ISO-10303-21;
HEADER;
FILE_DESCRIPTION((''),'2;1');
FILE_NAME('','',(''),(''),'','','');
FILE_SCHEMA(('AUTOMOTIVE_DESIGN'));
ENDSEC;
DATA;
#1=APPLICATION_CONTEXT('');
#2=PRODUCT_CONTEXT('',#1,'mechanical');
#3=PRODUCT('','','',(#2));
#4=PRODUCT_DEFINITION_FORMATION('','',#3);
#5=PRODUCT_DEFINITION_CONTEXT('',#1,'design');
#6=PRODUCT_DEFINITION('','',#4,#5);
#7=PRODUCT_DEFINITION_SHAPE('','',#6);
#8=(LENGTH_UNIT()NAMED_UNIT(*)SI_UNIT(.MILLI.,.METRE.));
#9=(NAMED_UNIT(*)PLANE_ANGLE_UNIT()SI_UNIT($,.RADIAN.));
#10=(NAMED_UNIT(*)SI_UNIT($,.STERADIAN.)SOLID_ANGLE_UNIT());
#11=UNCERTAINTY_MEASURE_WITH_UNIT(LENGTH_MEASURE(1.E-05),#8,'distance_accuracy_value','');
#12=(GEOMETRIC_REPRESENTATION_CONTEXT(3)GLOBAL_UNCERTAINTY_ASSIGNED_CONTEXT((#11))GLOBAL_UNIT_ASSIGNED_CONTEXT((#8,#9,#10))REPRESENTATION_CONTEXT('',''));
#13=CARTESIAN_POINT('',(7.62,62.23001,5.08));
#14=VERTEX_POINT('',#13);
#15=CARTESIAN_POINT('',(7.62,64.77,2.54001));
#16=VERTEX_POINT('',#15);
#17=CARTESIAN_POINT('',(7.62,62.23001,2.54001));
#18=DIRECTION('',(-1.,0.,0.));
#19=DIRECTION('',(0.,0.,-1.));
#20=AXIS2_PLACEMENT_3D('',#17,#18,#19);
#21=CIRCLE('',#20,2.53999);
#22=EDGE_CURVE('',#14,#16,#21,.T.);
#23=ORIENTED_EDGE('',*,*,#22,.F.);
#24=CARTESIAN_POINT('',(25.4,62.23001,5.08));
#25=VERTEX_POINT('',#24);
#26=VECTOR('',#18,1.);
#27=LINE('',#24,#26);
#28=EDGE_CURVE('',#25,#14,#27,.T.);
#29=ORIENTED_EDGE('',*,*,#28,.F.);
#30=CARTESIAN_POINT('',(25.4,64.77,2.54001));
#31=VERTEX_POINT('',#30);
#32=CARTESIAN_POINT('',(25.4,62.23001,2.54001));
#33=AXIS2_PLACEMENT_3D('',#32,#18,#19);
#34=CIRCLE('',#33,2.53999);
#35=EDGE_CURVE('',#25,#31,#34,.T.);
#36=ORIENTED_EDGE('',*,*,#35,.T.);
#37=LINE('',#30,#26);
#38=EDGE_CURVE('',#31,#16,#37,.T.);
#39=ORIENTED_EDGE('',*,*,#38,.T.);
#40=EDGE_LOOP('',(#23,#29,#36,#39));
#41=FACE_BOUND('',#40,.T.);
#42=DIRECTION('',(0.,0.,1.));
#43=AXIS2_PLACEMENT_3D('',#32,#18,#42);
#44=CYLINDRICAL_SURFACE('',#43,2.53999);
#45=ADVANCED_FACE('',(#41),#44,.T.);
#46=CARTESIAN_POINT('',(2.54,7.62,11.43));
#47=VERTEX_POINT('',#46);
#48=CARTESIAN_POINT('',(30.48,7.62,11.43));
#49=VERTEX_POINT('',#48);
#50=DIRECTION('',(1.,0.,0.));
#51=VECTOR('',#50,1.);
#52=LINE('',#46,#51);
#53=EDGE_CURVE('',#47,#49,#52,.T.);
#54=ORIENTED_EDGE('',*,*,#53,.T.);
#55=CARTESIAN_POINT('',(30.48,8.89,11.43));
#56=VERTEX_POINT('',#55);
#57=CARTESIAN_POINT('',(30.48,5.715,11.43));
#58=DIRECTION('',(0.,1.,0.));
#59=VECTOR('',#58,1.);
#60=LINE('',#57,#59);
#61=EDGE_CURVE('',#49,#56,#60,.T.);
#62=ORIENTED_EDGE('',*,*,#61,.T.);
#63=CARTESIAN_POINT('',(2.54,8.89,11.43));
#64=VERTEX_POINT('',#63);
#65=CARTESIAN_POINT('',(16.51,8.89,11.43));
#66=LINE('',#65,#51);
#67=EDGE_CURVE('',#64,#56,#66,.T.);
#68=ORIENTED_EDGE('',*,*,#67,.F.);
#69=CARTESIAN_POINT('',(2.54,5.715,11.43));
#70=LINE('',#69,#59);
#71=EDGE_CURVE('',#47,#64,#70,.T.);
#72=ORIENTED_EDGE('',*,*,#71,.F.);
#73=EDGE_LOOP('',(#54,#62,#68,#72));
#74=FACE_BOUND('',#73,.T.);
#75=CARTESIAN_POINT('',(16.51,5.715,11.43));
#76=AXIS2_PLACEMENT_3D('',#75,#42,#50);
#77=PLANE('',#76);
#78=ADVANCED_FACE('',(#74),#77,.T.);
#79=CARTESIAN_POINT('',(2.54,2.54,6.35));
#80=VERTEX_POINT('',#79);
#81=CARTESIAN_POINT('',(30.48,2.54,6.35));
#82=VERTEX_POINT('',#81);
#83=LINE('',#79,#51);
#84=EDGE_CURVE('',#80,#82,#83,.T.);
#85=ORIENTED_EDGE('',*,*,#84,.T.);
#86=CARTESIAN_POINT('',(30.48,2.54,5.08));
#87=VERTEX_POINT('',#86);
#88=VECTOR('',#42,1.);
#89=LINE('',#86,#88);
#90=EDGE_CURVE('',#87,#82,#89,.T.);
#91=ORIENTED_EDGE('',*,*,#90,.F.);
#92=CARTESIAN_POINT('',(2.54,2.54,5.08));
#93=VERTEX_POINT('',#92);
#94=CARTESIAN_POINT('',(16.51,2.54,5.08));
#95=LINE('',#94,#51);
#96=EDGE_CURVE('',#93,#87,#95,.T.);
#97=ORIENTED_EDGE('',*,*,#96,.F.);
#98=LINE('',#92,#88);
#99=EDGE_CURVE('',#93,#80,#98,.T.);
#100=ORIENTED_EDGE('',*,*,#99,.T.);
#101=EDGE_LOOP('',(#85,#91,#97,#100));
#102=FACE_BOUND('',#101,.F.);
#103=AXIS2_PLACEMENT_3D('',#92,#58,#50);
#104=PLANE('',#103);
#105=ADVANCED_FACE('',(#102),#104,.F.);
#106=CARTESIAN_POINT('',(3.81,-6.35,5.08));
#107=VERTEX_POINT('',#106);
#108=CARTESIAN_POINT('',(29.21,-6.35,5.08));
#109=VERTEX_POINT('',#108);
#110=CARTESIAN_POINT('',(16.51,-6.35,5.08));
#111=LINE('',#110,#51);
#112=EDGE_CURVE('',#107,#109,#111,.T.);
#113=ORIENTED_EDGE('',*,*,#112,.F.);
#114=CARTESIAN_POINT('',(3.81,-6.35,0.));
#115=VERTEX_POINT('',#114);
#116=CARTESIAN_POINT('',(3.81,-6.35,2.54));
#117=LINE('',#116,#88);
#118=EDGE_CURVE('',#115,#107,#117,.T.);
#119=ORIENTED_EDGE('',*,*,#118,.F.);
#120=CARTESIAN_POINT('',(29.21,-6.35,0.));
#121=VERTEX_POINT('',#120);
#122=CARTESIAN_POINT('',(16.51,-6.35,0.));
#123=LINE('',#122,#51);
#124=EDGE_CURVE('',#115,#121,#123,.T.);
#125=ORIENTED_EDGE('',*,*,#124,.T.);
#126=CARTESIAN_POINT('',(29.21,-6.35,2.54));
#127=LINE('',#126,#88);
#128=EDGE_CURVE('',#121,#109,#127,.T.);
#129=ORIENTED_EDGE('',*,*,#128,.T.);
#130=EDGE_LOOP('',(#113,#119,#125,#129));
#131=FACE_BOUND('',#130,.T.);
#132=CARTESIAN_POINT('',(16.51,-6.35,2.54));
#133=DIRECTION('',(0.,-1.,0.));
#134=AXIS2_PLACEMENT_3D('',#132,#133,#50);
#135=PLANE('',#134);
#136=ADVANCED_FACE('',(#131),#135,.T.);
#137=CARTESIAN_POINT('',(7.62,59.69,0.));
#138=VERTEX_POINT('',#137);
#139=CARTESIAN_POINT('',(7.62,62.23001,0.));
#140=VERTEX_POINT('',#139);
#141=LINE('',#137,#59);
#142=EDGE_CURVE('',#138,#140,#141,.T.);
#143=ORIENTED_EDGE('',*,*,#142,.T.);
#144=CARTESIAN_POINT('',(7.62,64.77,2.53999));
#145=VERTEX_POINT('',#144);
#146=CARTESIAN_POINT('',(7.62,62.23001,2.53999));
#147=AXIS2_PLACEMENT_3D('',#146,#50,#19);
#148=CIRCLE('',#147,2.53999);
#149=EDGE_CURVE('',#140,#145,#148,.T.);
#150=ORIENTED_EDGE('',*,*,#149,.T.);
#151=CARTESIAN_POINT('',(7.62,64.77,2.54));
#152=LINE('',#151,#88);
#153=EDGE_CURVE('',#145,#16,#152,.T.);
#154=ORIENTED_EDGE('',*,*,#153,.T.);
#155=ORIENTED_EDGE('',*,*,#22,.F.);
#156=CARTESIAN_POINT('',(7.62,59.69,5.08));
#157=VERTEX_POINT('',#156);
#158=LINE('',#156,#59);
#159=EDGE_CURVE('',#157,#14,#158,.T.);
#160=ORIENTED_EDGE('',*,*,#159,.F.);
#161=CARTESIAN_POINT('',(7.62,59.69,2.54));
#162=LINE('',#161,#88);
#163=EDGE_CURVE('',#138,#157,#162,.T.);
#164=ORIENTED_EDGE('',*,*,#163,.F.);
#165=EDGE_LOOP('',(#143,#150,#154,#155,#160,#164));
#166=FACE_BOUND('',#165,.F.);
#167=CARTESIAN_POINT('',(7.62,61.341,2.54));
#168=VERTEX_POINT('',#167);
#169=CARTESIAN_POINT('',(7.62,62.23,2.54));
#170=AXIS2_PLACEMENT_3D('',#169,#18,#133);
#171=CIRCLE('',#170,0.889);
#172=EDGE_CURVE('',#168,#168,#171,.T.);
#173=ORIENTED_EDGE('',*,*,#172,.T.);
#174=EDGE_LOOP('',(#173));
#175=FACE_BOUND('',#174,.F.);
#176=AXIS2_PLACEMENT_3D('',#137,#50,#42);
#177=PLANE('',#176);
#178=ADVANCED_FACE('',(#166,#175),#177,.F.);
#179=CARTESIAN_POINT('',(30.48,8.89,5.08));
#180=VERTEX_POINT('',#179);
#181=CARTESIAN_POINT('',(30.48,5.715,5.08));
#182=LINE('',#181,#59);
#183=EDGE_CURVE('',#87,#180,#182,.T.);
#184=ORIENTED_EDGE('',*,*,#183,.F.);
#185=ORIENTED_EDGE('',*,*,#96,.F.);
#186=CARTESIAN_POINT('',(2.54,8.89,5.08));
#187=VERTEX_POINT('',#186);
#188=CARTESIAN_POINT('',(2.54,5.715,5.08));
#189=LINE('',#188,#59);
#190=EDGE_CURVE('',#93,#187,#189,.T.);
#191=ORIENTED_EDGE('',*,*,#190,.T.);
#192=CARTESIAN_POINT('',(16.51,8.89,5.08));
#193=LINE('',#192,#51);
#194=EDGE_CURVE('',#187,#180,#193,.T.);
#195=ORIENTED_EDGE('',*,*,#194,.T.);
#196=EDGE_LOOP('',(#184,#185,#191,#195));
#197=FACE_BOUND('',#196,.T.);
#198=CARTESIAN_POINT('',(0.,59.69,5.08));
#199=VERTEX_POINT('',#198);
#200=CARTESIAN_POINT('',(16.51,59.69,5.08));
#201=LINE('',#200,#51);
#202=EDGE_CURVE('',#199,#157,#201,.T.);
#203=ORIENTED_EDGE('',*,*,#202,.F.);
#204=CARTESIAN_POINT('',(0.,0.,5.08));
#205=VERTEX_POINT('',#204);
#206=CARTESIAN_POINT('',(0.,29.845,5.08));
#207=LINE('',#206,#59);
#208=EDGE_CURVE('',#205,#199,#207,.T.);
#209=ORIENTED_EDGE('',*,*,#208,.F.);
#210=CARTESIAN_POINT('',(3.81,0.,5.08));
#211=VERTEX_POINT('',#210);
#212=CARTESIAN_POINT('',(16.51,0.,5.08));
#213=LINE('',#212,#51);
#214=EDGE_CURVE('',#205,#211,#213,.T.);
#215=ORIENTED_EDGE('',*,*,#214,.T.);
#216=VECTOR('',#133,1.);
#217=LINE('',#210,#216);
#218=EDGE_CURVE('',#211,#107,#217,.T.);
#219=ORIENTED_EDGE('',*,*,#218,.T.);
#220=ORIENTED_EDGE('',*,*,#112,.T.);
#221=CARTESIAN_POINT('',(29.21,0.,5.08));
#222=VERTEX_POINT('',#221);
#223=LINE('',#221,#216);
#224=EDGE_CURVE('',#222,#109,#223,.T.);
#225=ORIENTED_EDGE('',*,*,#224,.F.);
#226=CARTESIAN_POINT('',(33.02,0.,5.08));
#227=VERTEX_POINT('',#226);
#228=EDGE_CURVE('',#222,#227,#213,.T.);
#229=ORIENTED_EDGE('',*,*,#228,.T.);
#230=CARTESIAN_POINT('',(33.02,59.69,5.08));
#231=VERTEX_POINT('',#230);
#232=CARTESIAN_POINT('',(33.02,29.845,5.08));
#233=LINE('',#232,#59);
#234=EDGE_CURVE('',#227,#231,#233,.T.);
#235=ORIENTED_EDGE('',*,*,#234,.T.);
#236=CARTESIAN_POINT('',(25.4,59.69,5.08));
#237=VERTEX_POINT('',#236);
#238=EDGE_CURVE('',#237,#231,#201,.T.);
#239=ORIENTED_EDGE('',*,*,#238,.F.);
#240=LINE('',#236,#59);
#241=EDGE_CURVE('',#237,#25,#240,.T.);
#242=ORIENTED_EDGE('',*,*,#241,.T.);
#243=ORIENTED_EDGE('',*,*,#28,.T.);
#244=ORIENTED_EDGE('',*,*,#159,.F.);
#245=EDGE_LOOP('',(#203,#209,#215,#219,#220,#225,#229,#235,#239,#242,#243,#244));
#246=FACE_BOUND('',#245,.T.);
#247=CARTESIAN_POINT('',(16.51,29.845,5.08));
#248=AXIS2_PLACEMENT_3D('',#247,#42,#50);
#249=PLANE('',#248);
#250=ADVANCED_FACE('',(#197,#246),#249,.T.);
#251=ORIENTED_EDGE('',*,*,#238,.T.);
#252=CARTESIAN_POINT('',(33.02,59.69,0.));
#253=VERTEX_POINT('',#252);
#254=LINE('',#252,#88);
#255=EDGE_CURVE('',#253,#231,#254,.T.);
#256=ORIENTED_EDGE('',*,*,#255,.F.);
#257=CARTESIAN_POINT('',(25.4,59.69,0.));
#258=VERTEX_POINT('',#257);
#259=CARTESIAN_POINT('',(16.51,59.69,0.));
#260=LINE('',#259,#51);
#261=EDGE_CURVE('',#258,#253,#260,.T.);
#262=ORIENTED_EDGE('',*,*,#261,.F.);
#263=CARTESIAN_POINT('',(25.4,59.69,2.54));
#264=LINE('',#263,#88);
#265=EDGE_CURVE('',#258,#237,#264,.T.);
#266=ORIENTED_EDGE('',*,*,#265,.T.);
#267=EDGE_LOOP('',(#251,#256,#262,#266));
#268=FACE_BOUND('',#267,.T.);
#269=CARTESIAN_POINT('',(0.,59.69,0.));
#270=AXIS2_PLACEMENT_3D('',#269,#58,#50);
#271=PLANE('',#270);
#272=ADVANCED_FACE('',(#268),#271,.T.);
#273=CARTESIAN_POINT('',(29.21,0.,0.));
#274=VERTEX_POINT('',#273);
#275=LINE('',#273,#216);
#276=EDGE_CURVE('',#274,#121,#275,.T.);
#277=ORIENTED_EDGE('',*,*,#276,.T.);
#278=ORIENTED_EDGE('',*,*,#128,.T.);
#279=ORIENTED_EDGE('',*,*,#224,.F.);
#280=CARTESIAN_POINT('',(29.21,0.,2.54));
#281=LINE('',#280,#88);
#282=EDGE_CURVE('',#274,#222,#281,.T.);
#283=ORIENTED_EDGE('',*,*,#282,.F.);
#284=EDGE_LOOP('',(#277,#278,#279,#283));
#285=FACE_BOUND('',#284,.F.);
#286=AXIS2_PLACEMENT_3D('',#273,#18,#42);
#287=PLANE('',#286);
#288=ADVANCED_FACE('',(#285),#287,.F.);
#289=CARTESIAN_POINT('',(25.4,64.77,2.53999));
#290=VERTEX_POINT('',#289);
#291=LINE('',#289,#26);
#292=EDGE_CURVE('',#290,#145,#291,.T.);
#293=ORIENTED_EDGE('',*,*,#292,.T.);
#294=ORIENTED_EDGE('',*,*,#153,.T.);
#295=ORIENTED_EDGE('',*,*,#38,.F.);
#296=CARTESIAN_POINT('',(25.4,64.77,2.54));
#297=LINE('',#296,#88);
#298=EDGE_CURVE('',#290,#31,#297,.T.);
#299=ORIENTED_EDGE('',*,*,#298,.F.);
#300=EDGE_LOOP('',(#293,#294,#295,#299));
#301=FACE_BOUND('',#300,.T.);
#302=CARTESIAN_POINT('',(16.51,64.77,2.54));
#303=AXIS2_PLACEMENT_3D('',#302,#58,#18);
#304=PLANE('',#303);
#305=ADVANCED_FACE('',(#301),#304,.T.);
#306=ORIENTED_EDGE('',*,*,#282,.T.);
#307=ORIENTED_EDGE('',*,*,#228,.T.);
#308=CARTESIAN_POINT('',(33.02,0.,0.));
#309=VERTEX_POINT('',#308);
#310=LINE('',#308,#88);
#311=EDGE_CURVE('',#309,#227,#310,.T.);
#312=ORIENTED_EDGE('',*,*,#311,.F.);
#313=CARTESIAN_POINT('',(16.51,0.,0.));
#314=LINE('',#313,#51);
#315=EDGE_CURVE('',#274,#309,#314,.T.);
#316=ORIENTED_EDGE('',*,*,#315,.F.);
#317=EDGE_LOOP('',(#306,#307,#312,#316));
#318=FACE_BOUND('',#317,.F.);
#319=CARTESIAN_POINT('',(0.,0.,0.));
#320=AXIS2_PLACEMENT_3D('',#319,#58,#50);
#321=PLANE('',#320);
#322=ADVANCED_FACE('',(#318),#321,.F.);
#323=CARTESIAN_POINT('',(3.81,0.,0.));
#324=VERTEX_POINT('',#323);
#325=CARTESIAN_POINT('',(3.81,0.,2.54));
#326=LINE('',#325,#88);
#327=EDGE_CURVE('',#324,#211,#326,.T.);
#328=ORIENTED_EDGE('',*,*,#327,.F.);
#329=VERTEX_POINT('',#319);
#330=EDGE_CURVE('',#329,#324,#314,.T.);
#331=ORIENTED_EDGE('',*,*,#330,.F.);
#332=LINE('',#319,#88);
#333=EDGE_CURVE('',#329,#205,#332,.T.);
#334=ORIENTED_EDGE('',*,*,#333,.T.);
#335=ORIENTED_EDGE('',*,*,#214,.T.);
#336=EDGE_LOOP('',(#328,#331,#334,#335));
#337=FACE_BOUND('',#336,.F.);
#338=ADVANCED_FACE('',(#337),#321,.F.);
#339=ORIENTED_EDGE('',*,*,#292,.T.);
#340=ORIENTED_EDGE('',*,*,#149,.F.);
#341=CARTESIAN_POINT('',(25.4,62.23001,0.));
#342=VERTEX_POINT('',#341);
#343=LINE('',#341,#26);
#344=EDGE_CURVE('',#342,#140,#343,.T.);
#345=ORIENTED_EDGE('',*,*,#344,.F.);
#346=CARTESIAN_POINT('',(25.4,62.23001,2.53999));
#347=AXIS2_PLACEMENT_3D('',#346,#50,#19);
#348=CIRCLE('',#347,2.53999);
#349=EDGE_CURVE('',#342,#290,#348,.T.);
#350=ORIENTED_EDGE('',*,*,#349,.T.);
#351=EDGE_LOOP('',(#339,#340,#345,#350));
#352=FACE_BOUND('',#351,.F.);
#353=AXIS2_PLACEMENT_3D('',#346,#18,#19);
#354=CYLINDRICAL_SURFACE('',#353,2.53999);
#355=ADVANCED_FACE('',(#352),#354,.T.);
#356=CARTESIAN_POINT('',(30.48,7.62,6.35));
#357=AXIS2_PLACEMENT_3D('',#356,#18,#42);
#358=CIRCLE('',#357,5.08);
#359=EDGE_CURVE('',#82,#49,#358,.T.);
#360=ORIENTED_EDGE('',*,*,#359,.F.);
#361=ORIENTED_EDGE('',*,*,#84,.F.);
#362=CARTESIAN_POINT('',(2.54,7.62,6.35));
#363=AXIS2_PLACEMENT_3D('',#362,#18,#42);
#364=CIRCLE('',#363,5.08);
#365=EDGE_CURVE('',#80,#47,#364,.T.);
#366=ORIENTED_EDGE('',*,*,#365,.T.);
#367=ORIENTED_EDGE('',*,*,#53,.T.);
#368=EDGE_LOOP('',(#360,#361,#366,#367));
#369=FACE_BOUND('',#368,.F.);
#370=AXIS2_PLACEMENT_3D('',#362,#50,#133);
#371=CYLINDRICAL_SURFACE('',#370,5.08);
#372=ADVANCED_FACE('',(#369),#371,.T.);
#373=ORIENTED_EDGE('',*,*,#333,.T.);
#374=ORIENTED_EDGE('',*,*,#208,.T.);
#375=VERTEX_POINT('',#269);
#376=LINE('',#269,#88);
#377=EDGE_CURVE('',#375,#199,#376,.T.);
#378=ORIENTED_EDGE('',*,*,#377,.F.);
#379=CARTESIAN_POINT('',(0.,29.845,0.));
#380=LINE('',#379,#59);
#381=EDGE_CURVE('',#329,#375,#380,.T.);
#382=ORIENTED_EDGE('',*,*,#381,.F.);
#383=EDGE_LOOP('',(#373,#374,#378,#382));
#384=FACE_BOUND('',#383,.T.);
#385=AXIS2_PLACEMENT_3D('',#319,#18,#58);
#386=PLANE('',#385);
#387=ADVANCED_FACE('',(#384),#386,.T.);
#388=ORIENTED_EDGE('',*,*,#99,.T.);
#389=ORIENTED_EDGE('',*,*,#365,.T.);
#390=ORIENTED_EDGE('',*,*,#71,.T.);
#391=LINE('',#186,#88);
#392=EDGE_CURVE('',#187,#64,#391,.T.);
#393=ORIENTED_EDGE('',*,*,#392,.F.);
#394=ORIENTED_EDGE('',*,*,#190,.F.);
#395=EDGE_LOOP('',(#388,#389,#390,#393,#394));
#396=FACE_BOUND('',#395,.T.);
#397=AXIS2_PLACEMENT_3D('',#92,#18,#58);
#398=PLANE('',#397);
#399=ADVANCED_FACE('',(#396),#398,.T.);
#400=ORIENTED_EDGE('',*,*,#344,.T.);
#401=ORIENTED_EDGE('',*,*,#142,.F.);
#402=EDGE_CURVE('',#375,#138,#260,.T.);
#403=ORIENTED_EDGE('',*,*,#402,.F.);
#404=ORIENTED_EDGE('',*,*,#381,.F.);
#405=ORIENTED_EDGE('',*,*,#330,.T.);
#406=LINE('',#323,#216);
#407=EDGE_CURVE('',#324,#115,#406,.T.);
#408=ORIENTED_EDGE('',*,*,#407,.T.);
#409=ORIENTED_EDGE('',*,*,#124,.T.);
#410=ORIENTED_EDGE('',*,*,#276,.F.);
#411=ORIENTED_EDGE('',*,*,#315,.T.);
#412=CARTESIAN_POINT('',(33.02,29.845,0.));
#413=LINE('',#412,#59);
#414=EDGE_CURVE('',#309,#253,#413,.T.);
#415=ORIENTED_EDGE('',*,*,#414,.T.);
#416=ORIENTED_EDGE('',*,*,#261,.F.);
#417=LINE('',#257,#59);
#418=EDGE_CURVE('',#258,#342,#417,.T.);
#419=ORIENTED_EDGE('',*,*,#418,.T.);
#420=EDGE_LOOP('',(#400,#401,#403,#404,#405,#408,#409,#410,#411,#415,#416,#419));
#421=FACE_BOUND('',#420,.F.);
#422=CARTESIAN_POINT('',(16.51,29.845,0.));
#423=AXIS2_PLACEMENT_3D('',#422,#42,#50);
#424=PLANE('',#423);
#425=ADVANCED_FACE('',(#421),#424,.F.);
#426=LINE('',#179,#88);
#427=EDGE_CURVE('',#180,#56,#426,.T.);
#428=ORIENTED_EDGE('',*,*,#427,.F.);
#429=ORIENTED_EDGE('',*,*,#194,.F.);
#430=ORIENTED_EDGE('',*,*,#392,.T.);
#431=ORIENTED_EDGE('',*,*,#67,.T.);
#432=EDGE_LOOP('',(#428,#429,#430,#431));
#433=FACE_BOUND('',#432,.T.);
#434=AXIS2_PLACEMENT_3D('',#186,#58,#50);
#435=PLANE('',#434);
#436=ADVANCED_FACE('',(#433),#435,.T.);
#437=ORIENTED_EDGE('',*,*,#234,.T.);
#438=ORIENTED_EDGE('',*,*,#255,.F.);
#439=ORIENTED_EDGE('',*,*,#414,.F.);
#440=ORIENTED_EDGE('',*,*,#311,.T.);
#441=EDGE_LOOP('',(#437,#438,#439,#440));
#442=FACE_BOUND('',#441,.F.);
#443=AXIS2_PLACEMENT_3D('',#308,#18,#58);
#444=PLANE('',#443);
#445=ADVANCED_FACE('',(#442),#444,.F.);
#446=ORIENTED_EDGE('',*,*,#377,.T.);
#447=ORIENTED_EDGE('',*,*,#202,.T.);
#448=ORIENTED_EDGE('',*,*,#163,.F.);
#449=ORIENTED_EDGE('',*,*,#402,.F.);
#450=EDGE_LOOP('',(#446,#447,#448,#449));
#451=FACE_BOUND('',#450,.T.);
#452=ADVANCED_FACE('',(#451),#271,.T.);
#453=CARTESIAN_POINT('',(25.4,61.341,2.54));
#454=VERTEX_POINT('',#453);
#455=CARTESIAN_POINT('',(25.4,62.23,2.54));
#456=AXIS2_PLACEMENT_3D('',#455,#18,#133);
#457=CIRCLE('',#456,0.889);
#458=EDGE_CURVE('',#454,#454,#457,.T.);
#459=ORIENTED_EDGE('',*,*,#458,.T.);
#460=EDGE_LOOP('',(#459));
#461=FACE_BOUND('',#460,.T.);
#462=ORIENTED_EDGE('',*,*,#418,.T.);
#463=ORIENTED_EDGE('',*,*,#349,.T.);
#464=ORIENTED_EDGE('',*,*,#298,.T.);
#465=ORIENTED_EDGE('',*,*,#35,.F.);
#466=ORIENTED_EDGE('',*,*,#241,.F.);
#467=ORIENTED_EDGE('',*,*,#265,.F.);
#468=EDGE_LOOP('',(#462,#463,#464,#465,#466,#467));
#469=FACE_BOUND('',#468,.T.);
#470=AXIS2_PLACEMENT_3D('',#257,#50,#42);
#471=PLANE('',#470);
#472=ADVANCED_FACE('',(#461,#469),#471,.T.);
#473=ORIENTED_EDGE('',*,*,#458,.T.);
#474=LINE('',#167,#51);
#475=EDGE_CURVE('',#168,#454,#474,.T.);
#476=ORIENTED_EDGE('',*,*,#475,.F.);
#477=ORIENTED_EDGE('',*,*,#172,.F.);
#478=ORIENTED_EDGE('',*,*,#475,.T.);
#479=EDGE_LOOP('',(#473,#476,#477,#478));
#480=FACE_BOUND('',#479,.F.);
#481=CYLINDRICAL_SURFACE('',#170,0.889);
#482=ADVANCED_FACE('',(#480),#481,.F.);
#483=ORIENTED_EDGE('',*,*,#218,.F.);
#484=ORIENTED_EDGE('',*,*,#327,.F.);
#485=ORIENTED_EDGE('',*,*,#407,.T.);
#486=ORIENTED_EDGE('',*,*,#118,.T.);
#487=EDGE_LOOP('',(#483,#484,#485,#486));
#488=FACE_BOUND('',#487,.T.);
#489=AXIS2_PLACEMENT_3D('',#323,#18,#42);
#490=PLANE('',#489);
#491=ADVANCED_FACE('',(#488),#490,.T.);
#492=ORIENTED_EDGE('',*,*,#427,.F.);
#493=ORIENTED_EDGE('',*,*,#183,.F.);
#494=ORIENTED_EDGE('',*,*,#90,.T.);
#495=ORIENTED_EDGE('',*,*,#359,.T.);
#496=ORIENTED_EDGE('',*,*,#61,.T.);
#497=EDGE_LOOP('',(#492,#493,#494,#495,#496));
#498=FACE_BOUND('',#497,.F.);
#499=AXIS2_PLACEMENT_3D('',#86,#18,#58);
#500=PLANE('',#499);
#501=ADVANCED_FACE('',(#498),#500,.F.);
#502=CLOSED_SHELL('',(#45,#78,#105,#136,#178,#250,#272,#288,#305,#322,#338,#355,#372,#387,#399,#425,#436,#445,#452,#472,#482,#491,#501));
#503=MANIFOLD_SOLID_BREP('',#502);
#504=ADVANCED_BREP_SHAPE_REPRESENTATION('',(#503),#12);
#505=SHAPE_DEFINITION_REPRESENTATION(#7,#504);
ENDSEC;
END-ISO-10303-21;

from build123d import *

# Parameters (mm, degrees)
F0_W      = 33.02
F0_H      = 59.69
F1_DEPTH  = 5.08
F2_W      = 17.78
F2_H      = 5.08
F3_DEPTH  = 5.08
F4_R      = 0.889
F5_DEPTH  = 17.78
F6_R      = 2.53999
F7_W      = 27.94
F7_H      = 6.35
F8_DEPTH  = 6.35
F9_R      = 5.08
F10_W     = 25.4
F10_H     = 5.08
F11_DEPTH = 6.35


# Not quite as in the source:
# - a fillet or chamfer is up to 0.001 mm smaller than in the source, because OpenCascade refuses the exact size


with BuildPart() as f1:
    # F0 (on Top) → F1 (new body)
    with BuildSketch(Plane.XY):
        with Locations((16.51, 29.845)):
            Rectangle(F0_W, F0_H)
    extrude(amount=F1_DEPTH)

    # F2 (on face) → F3 (join)
    with BuildSketch(Plane(origin=(0, 59.69, 0), x_dir=(-1, 0, 0), z_dir=(0, 1, 0))):
        with Locations((-16.51, 2.54)):
            Rectangle(F2_W, F2_H)
    extrude(amount=F3_DEPTH)

    # F4 (on face) → F5 (cut)
    with BuildSketch(Plane(origin=(7.62, 0, 0), x_dir=(0, -1, 0), z_dir=(-1, 0, 0))):
        with Locations((-62.23, 2.54)):
            Circle(F4_R)
    extrude(amount=-F5_DEPTH, mode=Mode.SUBTRACT)

    # F6 (radius 2.54 in the source; OpenCascade refuses exactly that, so slightly less here)
    f6_edges = [f1.edges().sort_by_distance(p)[0] for p in [
        (16.51, 64.77, 0),
        (16.51, 64.77, 5.08),
    ]]
    fillet(f6_edges, radius=F6_R)

    # F7 (on face) → F8 (join)
    with BuildSketch(Plane.XY.offset(5.08)):
        with Locations((16.51, 5.715)):
            Rectangle(F7_W, F7_H)
    extrude(amount=F8_DEPTH)

    # F9
    f9_edges = [f1.edges().sort_by_distance(p)[0] for p in [
        (16.51, 2.54, 11.43),
    ]]
    fillet(f9_edges, radius=F9_R)

    # F10 (on face) → F11 (join)
    with BuildSketch(Plane.XZ):
        with Locations((16.51, 2.54)):
            Rectangle(F10_W, F10_H)
    extrude(amount=F11_DEPTH)


solid = f1.part
